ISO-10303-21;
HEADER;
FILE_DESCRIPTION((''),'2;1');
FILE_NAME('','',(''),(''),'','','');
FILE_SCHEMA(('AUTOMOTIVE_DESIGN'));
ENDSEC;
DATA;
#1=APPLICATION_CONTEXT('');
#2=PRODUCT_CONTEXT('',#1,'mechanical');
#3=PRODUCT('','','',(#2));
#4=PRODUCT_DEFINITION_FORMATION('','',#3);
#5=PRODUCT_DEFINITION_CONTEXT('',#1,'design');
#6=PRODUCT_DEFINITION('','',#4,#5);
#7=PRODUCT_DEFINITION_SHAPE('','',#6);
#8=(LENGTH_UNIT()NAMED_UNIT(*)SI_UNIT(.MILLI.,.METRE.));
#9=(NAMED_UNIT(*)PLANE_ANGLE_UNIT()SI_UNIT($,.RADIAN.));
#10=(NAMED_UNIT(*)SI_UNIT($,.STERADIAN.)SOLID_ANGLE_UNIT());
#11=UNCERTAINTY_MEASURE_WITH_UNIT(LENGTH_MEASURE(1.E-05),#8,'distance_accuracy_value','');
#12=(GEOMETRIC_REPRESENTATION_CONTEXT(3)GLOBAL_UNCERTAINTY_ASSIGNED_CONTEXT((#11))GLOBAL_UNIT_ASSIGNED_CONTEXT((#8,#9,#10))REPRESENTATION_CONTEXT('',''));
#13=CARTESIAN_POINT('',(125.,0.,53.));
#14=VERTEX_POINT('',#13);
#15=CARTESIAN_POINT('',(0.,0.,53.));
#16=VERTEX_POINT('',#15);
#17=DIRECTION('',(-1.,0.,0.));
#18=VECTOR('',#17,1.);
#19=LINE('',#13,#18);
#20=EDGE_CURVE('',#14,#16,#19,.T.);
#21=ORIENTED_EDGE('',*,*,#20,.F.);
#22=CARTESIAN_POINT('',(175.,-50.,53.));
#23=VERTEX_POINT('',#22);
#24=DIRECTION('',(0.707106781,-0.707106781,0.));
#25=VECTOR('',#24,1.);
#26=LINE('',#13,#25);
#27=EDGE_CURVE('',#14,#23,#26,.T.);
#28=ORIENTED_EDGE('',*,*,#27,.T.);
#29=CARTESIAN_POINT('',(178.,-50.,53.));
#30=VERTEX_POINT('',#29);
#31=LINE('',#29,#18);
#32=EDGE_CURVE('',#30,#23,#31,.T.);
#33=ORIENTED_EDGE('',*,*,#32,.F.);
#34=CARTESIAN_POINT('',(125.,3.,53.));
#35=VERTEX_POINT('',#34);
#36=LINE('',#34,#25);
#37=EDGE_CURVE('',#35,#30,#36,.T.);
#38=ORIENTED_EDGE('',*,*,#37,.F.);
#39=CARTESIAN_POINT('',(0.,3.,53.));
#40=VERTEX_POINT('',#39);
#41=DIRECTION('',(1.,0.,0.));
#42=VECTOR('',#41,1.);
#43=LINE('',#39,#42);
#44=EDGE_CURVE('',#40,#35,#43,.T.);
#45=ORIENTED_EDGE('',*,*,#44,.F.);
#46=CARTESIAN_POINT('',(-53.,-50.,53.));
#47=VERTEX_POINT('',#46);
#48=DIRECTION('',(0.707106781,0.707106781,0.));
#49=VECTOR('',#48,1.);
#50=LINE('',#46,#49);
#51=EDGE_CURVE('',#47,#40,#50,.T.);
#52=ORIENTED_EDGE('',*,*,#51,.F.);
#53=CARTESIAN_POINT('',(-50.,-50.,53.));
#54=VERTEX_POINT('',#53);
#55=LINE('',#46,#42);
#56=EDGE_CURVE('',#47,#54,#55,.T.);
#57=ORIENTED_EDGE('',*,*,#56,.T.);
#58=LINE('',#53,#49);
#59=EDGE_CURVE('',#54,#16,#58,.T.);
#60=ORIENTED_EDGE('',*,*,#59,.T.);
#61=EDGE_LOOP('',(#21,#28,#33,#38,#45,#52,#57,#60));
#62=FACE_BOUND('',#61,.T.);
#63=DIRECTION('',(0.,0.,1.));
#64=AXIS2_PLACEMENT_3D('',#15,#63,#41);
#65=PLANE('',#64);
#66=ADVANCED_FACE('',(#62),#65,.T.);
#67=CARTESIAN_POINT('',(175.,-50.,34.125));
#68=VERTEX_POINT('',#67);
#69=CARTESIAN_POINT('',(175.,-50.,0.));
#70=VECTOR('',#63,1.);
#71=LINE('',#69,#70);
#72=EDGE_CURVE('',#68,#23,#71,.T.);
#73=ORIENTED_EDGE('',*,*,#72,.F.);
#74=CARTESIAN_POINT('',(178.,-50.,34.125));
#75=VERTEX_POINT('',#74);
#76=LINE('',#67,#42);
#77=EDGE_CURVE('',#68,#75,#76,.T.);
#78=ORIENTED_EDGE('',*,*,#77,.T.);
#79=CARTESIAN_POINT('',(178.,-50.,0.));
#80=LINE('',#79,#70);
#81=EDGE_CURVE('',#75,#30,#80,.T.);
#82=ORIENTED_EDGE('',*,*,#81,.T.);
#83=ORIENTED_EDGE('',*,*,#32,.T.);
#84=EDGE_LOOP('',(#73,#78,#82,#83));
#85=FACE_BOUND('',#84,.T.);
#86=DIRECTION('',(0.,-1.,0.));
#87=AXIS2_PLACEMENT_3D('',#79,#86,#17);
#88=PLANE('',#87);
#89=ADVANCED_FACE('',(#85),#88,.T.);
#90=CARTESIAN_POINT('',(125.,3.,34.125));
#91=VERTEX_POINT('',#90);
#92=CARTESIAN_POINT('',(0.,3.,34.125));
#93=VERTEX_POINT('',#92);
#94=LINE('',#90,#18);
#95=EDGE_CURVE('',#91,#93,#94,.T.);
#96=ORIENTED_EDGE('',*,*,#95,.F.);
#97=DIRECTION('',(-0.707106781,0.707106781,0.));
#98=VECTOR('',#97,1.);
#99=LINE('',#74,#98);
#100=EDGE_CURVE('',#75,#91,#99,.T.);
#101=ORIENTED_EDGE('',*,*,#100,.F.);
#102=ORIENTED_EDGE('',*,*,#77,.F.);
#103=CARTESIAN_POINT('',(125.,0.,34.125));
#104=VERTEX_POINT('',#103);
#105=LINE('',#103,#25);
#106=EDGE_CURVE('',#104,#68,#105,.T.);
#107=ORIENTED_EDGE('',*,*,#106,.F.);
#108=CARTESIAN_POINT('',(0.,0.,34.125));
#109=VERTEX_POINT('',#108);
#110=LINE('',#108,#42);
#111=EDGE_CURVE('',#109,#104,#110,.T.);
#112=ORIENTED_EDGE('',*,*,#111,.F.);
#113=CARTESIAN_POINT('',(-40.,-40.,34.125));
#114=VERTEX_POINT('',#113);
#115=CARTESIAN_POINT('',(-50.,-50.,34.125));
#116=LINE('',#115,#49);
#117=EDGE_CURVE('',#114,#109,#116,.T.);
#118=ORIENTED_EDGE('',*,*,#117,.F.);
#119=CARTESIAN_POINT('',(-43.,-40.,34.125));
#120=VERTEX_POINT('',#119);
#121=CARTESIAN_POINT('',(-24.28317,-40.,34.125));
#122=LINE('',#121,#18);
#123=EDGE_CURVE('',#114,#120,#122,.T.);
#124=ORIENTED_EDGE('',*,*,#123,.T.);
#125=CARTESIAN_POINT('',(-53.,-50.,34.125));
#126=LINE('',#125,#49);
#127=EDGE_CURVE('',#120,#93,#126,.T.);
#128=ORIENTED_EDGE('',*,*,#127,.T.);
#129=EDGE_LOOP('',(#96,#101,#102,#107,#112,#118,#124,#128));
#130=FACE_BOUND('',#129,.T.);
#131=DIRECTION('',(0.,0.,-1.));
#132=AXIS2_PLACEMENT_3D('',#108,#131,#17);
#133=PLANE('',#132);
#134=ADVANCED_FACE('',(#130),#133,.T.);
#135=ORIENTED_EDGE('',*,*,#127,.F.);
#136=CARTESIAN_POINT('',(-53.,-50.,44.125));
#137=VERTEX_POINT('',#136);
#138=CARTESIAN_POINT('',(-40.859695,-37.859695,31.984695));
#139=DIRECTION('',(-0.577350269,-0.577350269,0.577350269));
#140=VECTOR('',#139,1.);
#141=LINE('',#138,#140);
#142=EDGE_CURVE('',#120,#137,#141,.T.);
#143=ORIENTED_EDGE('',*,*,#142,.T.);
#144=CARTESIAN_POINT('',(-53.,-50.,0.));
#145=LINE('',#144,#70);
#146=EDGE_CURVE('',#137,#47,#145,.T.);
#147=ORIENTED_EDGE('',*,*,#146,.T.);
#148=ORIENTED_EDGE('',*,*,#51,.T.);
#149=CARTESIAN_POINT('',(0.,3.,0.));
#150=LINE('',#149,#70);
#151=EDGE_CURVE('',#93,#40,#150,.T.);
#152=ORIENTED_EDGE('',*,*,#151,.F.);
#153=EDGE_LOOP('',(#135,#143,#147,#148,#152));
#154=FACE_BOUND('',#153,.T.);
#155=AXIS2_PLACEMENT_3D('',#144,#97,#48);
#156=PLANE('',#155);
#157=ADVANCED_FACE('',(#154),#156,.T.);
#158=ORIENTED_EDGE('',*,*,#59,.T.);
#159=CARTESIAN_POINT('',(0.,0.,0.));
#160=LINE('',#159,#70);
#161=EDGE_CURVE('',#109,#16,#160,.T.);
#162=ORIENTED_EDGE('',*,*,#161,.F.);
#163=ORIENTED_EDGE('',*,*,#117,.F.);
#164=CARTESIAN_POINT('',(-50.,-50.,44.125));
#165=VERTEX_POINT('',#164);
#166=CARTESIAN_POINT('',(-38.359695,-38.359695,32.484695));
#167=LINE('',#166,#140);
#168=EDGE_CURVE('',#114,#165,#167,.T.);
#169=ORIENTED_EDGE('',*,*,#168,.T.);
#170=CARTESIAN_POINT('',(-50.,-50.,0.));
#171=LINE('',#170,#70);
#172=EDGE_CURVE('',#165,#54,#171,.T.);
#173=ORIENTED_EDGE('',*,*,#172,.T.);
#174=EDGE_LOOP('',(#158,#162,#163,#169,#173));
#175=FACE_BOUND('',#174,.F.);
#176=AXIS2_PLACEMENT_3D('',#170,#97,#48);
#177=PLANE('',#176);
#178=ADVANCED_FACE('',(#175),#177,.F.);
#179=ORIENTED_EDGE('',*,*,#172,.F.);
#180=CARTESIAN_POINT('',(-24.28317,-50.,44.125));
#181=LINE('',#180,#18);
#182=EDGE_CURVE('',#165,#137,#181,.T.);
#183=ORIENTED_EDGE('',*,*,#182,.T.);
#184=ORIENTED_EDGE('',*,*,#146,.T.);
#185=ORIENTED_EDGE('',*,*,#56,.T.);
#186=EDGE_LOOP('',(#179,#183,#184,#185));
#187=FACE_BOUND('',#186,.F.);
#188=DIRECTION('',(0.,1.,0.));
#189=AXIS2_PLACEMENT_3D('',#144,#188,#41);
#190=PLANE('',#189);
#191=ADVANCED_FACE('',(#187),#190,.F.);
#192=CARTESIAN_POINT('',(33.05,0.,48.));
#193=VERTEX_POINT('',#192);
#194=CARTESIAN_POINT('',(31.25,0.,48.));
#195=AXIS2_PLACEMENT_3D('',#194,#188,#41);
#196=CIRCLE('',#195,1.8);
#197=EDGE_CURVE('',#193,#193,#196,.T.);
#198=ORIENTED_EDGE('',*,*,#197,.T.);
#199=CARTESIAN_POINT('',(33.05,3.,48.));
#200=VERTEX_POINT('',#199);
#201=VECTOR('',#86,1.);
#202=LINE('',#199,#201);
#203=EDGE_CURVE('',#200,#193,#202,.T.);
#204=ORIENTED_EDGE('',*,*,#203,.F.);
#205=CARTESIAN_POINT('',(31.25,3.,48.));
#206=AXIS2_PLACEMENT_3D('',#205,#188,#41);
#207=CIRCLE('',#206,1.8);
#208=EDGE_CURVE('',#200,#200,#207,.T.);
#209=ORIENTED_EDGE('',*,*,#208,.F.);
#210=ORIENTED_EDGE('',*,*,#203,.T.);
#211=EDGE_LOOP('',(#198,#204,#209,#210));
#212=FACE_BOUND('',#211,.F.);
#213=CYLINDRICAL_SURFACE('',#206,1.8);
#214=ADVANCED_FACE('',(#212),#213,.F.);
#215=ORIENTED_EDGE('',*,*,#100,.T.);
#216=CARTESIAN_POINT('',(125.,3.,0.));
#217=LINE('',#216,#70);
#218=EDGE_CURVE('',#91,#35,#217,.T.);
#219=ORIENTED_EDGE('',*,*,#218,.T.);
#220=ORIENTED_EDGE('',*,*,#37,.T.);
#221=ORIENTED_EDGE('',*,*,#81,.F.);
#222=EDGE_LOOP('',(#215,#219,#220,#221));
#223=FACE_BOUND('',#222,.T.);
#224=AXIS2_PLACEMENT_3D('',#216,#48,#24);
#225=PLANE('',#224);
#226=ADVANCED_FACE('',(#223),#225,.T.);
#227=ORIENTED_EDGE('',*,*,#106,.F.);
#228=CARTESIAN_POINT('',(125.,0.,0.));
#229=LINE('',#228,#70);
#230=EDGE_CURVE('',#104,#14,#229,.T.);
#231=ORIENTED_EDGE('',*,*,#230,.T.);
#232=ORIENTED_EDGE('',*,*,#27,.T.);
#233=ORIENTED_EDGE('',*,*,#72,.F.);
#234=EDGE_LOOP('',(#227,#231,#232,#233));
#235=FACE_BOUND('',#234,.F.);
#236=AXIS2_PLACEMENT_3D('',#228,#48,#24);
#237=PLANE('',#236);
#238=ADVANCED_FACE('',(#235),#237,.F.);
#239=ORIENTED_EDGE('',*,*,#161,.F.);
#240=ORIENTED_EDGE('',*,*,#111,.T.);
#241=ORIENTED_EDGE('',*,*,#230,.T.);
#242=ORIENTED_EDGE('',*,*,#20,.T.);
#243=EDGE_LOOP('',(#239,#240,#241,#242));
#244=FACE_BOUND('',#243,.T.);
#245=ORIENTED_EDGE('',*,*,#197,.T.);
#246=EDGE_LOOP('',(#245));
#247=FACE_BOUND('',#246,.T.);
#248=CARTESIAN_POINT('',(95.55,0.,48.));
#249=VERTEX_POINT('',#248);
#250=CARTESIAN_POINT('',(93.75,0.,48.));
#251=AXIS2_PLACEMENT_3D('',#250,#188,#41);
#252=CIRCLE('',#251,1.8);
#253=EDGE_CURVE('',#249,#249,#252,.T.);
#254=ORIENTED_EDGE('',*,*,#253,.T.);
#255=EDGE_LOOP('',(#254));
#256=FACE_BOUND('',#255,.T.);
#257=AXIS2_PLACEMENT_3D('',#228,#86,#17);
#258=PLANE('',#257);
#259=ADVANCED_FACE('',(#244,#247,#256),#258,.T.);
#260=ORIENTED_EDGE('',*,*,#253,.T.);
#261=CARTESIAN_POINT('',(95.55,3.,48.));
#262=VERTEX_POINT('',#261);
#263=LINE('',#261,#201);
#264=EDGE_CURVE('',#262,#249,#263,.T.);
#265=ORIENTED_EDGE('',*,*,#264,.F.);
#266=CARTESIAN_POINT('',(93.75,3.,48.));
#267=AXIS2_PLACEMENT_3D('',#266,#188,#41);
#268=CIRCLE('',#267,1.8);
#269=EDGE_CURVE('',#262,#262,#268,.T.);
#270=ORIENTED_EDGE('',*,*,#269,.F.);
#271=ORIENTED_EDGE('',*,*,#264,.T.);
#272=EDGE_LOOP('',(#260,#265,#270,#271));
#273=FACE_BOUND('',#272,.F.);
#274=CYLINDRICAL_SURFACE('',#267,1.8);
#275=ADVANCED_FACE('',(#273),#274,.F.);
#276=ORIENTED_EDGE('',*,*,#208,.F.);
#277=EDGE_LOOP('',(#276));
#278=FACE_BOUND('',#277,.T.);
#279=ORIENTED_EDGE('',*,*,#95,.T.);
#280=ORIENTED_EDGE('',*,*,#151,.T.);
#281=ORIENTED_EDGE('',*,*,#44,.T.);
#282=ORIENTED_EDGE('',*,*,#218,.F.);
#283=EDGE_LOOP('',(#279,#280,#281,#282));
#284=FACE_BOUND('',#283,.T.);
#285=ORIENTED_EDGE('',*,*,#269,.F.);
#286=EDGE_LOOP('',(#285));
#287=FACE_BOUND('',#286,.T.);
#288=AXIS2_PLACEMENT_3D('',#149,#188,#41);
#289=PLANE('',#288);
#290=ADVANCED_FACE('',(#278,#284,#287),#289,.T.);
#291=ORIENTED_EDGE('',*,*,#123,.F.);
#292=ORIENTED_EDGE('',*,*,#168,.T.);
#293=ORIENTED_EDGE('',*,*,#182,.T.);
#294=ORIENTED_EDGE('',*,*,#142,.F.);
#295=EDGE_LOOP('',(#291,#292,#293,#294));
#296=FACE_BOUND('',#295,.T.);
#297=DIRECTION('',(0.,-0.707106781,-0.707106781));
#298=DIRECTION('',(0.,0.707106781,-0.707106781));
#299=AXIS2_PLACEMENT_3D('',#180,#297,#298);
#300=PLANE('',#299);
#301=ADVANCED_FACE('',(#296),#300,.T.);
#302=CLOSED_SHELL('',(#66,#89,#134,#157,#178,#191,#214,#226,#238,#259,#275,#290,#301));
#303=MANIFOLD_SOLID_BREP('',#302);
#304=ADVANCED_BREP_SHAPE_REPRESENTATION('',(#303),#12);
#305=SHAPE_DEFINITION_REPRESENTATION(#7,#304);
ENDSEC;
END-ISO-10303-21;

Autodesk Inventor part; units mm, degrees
ref_plane "YZ Plane" through (0, 0, 0) normal (1, 0, 0) x (0, 1, 0)
ref_plane "XZ Plane" through (0, 0, 0) normal (0, 1, 0) x (-1, 0, 0)
ref_plane "XY Plane" through (0, 0, 0) normal (0, 0, 1) x (1, 0, 0)
sketch "Sketch1" plane through (0, 0, 0) normal (0, 0, 1) x (1, 0, 0)
  line L0 (-50, -50) -> (0, 0)
  line L1 (125, 0) -> (0, 0)
  line L2 (125, 0) -> (175, -50)
  line L3 (178, -50) -> (175, -50)
  line L4 (-53, -50) -> (-50, -50)
  circle A0 centre (117.5, -37.5) radius 1.5
  arc A1 (114.25, -43.8002) -> (114.25, -56.1998) centre (117.5, -50) ccw
  arc A2 (120.75, -56.1998) -> (120.75, -43.8002) centre (117.5, -50) ccw
  line L5 (-53, -50) -> (0, 3)
  line L6 (0, 3) -> (125, 3)
  line L7 (125, 3) -> (178, -50)
extrude "Extrusion1" add sketch "Sketch1" along normal blind 53 contours L4 L5 L6 L7 L3 L2 L1 L0
sketch "Sketch2" plane through (0, 3, 0) normal (0, 1, 0) x (1, 0, 0)
  line L0 (0, -43) -> (125, -43)
  line L1 (125, -53) -> (0, -53)
  circle A0 centre (31.25, -48) radius 1.8
  circle A1 centre (93.75, -48) radius 1.8
  line L2 (-53, -10.625) -> (-53, -53)
  line L3 (-53, -53) -> (-50, -53)
  line L4 (-50, -53) -> (0, -53)
  line L5 (0, 0) -> (-53, 0) projected
  line L6 (-53, 0) -> (-53, -53) projected
  line L7 (0, -53) -> (-53, -53) projected
  line L8 (0, 0) -> (0, -53) projected
  circle A2 centre (31.25, -48) radius 1.6
  circle A3 centre (93.75, -48) radius 1.6
  dimension "d2" = 3.2
  dimension "d3" = 3.2
extrude "Extrusion2" cut sketch "Sketch2" against normal up to surface (3 mm away) contours A0 | A1 | A2 | A3
sketch "Sketch3" plane through (0, 0, 0) normal (0, 0, -1) x (-1, 0, 0)
  line L0 (0, 3) -> (53, -50) projected
  line L1 (-125, 3) -> (0, 3) projected
  line L2 (-178, -50) -> (-125, 3) projected
  line L3 (-175, -50) -> (-178, -50) projected
  line L4 (-125, 0) -> (-175, -50) projected
  line L5 (0, 0) -> (-125, 0) projected
  line L6 (50, -50) -> (0, 0) projected
  line L7 (53, -50) -> (43, -40) projected
  line L8 (43, -40) -> (40, -40) projected
  line L9 (40, -40) -> (50, -50) projected
  line L10 (50, -50) -> (53, -50) projected
  line L11 (53, -50) -> (50, -50) projected
extrude "Extrusion3" cut sketch "Sketch3" against normal blind 34.125
chamfer "Chamfer2" distance 10 angle 45 1 edges at (-51.5, -50, 34.125)
properties part number "obudowa_górna_krótka" material "ABS Plastic"
